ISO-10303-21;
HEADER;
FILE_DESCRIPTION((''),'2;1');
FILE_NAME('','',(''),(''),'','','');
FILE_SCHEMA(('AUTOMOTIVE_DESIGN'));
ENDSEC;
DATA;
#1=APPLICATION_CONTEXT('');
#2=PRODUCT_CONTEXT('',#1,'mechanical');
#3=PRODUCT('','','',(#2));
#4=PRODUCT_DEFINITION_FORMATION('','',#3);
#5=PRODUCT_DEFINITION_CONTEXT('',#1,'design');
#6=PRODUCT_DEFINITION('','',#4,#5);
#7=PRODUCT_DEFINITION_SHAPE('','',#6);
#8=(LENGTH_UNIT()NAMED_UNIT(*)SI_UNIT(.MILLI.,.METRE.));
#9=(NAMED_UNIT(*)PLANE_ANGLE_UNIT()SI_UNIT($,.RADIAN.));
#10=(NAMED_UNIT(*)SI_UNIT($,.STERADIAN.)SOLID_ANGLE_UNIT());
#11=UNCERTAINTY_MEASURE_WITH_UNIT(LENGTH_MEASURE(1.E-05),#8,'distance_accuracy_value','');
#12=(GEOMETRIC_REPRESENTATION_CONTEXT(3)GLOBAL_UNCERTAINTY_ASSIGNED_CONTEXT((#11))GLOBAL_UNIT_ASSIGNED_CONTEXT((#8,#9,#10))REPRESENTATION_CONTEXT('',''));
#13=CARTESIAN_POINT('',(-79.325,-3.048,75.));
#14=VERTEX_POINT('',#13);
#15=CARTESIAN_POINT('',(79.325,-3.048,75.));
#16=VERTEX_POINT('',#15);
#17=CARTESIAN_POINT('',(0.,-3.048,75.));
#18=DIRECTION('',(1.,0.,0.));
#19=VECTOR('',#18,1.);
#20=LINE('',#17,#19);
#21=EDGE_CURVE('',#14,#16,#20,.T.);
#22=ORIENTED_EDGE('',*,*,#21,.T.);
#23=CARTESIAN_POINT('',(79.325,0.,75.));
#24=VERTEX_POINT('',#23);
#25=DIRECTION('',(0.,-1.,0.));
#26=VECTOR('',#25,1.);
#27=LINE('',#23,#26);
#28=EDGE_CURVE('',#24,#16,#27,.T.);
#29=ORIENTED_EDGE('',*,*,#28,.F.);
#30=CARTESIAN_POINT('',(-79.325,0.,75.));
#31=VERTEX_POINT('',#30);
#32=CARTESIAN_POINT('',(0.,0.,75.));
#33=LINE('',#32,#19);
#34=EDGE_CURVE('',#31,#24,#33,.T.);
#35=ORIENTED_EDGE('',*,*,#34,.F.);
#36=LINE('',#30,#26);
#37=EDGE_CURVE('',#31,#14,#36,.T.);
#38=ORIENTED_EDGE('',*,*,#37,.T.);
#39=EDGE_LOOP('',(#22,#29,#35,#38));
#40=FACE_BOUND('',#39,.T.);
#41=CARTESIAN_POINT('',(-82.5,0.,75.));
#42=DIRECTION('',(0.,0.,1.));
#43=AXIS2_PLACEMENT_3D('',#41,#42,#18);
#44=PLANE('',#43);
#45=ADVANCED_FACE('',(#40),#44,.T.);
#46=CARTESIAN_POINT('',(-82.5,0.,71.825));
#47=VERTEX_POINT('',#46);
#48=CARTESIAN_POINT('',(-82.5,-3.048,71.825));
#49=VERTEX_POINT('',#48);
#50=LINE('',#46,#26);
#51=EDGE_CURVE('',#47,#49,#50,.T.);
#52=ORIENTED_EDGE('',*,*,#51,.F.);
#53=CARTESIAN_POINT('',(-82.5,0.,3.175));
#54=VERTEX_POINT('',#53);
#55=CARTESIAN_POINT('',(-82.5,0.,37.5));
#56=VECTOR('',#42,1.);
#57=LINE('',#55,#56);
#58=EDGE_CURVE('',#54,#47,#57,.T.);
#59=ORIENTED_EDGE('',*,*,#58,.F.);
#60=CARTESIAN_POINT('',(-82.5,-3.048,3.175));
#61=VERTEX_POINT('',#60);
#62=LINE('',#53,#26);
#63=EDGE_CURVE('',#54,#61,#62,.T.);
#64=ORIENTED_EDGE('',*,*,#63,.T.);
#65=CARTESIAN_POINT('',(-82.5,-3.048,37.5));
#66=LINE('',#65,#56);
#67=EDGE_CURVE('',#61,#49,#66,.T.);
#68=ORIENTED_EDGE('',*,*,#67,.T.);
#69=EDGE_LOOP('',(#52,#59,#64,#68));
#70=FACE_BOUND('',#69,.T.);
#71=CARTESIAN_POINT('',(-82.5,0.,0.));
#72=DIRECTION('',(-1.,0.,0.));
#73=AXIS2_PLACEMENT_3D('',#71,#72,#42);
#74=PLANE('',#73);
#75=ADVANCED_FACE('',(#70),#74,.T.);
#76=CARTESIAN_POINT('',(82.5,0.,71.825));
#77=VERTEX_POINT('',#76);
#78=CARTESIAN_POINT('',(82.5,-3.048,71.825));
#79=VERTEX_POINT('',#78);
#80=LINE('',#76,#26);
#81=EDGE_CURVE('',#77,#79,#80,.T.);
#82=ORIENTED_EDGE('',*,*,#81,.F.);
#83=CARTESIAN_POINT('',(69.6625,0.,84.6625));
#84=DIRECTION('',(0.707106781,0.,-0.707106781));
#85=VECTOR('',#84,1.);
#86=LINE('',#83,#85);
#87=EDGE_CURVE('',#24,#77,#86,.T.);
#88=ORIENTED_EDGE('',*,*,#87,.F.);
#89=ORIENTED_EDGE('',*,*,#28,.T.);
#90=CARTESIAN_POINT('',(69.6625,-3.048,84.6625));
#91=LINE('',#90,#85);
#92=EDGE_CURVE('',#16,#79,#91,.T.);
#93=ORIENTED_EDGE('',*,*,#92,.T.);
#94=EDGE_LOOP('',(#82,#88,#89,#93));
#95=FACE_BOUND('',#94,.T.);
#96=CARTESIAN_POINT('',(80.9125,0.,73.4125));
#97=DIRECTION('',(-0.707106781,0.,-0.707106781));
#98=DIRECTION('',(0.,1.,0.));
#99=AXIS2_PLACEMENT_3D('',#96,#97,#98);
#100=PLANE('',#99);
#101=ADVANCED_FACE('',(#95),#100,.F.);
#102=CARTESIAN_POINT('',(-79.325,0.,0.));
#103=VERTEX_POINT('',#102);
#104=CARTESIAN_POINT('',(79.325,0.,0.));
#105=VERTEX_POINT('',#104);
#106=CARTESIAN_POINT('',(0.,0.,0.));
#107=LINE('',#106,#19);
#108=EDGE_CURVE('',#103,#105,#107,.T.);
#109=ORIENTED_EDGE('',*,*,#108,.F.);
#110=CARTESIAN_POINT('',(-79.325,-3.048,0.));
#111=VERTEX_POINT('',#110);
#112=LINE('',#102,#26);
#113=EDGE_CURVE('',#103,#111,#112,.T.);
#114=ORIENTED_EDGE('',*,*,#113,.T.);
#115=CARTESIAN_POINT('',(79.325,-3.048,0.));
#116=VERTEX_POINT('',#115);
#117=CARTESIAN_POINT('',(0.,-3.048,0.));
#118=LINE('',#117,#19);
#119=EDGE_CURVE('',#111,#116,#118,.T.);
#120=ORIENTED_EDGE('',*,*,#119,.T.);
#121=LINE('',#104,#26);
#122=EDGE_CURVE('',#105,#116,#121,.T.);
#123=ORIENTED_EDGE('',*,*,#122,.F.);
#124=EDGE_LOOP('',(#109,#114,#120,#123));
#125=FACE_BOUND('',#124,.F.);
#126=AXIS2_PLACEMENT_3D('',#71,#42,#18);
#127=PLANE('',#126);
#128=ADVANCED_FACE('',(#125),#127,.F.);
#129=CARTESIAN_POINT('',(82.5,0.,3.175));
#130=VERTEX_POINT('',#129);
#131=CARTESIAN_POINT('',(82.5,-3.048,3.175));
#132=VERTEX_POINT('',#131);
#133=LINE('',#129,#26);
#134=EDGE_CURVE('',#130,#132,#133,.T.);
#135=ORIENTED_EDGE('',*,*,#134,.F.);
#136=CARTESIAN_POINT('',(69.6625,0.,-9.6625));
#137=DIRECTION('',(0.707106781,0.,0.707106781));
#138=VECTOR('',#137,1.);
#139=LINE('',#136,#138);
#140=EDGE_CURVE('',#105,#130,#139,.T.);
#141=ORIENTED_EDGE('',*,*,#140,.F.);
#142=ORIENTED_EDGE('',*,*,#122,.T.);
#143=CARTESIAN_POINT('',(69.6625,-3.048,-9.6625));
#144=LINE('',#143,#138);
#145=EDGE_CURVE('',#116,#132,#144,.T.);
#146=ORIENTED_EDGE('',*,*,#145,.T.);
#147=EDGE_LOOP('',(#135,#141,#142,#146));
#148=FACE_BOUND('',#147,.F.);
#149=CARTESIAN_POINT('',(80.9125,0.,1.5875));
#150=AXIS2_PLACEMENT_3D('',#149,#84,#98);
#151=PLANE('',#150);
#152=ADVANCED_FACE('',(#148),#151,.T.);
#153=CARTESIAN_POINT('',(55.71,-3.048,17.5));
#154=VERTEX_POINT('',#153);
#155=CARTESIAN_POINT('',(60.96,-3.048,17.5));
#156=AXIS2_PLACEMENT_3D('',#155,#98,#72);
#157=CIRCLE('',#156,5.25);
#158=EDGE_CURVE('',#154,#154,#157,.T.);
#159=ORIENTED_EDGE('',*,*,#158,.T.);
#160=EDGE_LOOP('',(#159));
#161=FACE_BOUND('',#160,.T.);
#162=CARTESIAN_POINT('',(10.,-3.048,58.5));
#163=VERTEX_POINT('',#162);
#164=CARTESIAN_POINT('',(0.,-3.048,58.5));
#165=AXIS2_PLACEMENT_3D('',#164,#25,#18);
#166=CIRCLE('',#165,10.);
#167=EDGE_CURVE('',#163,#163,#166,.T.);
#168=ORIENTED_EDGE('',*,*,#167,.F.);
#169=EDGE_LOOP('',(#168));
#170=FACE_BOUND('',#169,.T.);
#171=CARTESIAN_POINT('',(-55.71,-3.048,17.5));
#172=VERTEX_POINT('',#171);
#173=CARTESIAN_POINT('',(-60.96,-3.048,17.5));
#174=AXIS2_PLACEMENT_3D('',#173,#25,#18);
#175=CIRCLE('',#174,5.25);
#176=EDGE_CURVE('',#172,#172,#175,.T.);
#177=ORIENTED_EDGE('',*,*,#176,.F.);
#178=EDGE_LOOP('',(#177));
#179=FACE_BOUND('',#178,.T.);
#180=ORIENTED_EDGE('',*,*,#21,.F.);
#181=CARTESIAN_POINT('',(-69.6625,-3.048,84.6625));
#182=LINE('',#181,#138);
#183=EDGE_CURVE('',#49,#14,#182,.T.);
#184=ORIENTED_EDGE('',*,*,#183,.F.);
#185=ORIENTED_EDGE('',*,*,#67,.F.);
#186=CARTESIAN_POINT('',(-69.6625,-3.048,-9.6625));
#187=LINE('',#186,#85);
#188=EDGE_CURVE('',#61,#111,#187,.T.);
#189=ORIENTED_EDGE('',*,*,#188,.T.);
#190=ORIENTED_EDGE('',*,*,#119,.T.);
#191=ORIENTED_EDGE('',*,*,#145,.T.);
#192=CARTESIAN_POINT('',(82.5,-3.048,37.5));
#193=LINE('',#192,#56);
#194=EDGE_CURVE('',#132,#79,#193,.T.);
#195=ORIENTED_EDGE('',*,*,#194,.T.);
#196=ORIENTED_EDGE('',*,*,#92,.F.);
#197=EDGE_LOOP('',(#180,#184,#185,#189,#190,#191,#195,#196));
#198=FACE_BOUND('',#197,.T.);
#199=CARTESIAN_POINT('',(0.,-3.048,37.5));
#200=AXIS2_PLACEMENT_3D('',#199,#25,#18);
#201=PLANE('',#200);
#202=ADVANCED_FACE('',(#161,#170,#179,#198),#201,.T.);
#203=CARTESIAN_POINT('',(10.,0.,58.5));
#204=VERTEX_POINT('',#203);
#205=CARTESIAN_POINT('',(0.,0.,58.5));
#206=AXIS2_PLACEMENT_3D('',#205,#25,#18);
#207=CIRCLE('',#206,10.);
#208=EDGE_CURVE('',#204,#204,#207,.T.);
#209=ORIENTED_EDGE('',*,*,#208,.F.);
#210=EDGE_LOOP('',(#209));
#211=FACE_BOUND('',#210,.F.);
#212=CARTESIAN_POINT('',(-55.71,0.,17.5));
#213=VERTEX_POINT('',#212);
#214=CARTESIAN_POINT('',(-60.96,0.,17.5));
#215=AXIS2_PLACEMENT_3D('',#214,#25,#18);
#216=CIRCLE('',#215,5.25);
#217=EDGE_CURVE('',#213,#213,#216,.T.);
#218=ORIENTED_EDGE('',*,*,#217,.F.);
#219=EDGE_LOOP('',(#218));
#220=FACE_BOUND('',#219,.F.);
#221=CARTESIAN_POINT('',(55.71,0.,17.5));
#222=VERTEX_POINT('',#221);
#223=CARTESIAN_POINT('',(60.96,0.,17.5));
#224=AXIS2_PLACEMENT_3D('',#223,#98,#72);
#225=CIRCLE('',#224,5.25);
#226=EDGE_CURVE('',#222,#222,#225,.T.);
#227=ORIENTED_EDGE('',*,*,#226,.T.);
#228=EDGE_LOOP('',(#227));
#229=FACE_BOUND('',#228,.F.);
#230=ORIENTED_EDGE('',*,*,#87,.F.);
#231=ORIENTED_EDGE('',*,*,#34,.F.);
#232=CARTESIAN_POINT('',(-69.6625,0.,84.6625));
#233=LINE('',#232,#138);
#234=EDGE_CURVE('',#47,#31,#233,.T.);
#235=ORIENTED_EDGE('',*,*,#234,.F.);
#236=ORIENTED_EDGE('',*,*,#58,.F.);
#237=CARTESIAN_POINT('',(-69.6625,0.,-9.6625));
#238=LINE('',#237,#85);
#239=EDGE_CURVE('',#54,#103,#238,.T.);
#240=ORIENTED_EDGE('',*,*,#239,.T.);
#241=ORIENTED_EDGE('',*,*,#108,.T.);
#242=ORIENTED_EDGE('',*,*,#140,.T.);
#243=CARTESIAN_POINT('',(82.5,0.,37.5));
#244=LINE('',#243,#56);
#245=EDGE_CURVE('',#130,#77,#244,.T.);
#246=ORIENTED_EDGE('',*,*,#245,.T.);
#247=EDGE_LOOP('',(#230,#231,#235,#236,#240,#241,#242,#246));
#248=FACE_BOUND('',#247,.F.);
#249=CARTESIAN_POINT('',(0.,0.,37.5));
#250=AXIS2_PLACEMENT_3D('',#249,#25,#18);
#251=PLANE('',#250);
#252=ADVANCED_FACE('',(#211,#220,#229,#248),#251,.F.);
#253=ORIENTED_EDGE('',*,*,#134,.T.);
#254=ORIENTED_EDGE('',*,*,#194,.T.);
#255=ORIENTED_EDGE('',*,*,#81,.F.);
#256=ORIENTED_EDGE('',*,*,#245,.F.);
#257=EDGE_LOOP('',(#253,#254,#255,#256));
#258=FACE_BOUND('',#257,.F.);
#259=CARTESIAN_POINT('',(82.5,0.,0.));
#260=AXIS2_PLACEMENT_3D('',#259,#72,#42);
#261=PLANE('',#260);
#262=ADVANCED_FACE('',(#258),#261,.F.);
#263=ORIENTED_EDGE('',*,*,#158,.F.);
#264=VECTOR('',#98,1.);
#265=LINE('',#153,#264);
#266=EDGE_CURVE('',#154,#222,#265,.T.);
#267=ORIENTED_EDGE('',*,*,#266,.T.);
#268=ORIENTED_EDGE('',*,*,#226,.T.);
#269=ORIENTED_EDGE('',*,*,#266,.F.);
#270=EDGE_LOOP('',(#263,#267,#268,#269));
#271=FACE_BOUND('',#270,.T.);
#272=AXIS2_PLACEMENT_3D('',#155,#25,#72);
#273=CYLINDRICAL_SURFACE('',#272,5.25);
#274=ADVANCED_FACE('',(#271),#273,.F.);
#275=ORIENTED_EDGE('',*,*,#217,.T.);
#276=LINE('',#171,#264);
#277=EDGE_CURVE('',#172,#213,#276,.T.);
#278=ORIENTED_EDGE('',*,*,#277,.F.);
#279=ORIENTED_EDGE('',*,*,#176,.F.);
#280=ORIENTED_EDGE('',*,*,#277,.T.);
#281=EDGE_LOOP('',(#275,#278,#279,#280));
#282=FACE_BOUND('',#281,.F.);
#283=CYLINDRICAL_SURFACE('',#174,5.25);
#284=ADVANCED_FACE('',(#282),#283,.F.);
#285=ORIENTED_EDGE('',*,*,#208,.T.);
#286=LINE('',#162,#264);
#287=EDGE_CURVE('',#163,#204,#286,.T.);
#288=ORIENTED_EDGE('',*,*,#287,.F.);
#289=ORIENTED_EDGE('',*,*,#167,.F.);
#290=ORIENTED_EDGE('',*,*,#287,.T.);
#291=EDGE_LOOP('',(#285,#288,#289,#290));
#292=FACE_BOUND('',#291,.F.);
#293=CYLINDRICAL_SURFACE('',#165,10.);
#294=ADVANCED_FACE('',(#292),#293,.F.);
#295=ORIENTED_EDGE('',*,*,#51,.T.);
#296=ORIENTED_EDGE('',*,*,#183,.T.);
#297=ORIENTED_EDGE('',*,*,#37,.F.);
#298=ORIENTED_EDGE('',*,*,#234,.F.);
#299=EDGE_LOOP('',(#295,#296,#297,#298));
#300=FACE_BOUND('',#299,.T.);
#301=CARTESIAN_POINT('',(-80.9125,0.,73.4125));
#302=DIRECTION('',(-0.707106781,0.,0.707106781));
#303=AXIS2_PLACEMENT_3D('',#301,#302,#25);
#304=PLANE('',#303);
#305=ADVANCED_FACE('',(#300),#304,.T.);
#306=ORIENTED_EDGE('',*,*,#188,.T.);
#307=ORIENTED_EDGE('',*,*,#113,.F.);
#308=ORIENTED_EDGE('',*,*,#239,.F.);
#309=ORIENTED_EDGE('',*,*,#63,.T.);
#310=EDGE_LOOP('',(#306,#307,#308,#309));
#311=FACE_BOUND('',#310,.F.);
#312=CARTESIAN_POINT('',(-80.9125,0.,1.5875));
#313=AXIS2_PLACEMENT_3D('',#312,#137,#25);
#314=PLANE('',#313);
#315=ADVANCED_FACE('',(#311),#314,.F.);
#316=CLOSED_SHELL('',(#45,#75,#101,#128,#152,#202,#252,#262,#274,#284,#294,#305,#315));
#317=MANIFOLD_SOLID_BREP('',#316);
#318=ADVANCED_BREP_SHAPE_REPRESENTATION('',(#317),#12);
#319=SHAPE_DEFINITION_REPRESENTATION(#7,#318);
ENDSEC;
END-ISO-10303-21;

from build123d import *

# Parameters (mm, degrees)
F0_W     = 165
F0_H     = 75
F1_DEPTH = 3.048
F2_R     = 5.25
F3_DEPTH = 3.048
F4_R     = 10
F5_DEPTH = 3.048
F6_SIZE  = 3.175


# Not quite as in the source:
# - a pattern or mirror of a feature is missing from the dataset's text; its kind, count and spacing are read off the source's solid


with BuildPart() as f1:
    # F0 (on Front) → F1 (new body)
    with BuildSketch(Plane.XZ):
        with Locations((0, 37.5)):
            Rectangle(F0_W, F0_H)
    extrude(amount=F1_DEPTH)

    # F2 (on face) → F3 (cut)
    with BuildSketch(Plane.XZ.offset(3.048)):
        with Locations((-60.96, 17.5)):
            Circle(F2_R)
    f3 = extrude(amount=-F3_DEPTH, mode=Mode.SUBTRACT)

    # F3_copies: F3 across plane
    add(f3.mirror(Plane(origin=(0, 0, 0), x_dir=(0, 0, 1), z_dir=(1, 0, 0))), mode=Mode.SUBTRACT)

    # F4 (on face) → F5 (cut)
    with BuildSketch(Plane.XZ.offset(3.048)):
        with Locations((0, 58.5)):
            Circle(F4_R)
    extrude(amount=-F5_DEPTH, mode=Mode.SUBTRACT)

    # F6
    f6_edges = [f1.edges().sort_by_distance(p)[0] for p in [
        (-82.5, -1.524, 75),
        (-82.5, -1.524, 0),
        (82.5, -1.524, 0),
        (82.5, -1.524, 75),
    ]]
    chamfer(f6_edges, length=F6_SIZE)


solid = f1.part
